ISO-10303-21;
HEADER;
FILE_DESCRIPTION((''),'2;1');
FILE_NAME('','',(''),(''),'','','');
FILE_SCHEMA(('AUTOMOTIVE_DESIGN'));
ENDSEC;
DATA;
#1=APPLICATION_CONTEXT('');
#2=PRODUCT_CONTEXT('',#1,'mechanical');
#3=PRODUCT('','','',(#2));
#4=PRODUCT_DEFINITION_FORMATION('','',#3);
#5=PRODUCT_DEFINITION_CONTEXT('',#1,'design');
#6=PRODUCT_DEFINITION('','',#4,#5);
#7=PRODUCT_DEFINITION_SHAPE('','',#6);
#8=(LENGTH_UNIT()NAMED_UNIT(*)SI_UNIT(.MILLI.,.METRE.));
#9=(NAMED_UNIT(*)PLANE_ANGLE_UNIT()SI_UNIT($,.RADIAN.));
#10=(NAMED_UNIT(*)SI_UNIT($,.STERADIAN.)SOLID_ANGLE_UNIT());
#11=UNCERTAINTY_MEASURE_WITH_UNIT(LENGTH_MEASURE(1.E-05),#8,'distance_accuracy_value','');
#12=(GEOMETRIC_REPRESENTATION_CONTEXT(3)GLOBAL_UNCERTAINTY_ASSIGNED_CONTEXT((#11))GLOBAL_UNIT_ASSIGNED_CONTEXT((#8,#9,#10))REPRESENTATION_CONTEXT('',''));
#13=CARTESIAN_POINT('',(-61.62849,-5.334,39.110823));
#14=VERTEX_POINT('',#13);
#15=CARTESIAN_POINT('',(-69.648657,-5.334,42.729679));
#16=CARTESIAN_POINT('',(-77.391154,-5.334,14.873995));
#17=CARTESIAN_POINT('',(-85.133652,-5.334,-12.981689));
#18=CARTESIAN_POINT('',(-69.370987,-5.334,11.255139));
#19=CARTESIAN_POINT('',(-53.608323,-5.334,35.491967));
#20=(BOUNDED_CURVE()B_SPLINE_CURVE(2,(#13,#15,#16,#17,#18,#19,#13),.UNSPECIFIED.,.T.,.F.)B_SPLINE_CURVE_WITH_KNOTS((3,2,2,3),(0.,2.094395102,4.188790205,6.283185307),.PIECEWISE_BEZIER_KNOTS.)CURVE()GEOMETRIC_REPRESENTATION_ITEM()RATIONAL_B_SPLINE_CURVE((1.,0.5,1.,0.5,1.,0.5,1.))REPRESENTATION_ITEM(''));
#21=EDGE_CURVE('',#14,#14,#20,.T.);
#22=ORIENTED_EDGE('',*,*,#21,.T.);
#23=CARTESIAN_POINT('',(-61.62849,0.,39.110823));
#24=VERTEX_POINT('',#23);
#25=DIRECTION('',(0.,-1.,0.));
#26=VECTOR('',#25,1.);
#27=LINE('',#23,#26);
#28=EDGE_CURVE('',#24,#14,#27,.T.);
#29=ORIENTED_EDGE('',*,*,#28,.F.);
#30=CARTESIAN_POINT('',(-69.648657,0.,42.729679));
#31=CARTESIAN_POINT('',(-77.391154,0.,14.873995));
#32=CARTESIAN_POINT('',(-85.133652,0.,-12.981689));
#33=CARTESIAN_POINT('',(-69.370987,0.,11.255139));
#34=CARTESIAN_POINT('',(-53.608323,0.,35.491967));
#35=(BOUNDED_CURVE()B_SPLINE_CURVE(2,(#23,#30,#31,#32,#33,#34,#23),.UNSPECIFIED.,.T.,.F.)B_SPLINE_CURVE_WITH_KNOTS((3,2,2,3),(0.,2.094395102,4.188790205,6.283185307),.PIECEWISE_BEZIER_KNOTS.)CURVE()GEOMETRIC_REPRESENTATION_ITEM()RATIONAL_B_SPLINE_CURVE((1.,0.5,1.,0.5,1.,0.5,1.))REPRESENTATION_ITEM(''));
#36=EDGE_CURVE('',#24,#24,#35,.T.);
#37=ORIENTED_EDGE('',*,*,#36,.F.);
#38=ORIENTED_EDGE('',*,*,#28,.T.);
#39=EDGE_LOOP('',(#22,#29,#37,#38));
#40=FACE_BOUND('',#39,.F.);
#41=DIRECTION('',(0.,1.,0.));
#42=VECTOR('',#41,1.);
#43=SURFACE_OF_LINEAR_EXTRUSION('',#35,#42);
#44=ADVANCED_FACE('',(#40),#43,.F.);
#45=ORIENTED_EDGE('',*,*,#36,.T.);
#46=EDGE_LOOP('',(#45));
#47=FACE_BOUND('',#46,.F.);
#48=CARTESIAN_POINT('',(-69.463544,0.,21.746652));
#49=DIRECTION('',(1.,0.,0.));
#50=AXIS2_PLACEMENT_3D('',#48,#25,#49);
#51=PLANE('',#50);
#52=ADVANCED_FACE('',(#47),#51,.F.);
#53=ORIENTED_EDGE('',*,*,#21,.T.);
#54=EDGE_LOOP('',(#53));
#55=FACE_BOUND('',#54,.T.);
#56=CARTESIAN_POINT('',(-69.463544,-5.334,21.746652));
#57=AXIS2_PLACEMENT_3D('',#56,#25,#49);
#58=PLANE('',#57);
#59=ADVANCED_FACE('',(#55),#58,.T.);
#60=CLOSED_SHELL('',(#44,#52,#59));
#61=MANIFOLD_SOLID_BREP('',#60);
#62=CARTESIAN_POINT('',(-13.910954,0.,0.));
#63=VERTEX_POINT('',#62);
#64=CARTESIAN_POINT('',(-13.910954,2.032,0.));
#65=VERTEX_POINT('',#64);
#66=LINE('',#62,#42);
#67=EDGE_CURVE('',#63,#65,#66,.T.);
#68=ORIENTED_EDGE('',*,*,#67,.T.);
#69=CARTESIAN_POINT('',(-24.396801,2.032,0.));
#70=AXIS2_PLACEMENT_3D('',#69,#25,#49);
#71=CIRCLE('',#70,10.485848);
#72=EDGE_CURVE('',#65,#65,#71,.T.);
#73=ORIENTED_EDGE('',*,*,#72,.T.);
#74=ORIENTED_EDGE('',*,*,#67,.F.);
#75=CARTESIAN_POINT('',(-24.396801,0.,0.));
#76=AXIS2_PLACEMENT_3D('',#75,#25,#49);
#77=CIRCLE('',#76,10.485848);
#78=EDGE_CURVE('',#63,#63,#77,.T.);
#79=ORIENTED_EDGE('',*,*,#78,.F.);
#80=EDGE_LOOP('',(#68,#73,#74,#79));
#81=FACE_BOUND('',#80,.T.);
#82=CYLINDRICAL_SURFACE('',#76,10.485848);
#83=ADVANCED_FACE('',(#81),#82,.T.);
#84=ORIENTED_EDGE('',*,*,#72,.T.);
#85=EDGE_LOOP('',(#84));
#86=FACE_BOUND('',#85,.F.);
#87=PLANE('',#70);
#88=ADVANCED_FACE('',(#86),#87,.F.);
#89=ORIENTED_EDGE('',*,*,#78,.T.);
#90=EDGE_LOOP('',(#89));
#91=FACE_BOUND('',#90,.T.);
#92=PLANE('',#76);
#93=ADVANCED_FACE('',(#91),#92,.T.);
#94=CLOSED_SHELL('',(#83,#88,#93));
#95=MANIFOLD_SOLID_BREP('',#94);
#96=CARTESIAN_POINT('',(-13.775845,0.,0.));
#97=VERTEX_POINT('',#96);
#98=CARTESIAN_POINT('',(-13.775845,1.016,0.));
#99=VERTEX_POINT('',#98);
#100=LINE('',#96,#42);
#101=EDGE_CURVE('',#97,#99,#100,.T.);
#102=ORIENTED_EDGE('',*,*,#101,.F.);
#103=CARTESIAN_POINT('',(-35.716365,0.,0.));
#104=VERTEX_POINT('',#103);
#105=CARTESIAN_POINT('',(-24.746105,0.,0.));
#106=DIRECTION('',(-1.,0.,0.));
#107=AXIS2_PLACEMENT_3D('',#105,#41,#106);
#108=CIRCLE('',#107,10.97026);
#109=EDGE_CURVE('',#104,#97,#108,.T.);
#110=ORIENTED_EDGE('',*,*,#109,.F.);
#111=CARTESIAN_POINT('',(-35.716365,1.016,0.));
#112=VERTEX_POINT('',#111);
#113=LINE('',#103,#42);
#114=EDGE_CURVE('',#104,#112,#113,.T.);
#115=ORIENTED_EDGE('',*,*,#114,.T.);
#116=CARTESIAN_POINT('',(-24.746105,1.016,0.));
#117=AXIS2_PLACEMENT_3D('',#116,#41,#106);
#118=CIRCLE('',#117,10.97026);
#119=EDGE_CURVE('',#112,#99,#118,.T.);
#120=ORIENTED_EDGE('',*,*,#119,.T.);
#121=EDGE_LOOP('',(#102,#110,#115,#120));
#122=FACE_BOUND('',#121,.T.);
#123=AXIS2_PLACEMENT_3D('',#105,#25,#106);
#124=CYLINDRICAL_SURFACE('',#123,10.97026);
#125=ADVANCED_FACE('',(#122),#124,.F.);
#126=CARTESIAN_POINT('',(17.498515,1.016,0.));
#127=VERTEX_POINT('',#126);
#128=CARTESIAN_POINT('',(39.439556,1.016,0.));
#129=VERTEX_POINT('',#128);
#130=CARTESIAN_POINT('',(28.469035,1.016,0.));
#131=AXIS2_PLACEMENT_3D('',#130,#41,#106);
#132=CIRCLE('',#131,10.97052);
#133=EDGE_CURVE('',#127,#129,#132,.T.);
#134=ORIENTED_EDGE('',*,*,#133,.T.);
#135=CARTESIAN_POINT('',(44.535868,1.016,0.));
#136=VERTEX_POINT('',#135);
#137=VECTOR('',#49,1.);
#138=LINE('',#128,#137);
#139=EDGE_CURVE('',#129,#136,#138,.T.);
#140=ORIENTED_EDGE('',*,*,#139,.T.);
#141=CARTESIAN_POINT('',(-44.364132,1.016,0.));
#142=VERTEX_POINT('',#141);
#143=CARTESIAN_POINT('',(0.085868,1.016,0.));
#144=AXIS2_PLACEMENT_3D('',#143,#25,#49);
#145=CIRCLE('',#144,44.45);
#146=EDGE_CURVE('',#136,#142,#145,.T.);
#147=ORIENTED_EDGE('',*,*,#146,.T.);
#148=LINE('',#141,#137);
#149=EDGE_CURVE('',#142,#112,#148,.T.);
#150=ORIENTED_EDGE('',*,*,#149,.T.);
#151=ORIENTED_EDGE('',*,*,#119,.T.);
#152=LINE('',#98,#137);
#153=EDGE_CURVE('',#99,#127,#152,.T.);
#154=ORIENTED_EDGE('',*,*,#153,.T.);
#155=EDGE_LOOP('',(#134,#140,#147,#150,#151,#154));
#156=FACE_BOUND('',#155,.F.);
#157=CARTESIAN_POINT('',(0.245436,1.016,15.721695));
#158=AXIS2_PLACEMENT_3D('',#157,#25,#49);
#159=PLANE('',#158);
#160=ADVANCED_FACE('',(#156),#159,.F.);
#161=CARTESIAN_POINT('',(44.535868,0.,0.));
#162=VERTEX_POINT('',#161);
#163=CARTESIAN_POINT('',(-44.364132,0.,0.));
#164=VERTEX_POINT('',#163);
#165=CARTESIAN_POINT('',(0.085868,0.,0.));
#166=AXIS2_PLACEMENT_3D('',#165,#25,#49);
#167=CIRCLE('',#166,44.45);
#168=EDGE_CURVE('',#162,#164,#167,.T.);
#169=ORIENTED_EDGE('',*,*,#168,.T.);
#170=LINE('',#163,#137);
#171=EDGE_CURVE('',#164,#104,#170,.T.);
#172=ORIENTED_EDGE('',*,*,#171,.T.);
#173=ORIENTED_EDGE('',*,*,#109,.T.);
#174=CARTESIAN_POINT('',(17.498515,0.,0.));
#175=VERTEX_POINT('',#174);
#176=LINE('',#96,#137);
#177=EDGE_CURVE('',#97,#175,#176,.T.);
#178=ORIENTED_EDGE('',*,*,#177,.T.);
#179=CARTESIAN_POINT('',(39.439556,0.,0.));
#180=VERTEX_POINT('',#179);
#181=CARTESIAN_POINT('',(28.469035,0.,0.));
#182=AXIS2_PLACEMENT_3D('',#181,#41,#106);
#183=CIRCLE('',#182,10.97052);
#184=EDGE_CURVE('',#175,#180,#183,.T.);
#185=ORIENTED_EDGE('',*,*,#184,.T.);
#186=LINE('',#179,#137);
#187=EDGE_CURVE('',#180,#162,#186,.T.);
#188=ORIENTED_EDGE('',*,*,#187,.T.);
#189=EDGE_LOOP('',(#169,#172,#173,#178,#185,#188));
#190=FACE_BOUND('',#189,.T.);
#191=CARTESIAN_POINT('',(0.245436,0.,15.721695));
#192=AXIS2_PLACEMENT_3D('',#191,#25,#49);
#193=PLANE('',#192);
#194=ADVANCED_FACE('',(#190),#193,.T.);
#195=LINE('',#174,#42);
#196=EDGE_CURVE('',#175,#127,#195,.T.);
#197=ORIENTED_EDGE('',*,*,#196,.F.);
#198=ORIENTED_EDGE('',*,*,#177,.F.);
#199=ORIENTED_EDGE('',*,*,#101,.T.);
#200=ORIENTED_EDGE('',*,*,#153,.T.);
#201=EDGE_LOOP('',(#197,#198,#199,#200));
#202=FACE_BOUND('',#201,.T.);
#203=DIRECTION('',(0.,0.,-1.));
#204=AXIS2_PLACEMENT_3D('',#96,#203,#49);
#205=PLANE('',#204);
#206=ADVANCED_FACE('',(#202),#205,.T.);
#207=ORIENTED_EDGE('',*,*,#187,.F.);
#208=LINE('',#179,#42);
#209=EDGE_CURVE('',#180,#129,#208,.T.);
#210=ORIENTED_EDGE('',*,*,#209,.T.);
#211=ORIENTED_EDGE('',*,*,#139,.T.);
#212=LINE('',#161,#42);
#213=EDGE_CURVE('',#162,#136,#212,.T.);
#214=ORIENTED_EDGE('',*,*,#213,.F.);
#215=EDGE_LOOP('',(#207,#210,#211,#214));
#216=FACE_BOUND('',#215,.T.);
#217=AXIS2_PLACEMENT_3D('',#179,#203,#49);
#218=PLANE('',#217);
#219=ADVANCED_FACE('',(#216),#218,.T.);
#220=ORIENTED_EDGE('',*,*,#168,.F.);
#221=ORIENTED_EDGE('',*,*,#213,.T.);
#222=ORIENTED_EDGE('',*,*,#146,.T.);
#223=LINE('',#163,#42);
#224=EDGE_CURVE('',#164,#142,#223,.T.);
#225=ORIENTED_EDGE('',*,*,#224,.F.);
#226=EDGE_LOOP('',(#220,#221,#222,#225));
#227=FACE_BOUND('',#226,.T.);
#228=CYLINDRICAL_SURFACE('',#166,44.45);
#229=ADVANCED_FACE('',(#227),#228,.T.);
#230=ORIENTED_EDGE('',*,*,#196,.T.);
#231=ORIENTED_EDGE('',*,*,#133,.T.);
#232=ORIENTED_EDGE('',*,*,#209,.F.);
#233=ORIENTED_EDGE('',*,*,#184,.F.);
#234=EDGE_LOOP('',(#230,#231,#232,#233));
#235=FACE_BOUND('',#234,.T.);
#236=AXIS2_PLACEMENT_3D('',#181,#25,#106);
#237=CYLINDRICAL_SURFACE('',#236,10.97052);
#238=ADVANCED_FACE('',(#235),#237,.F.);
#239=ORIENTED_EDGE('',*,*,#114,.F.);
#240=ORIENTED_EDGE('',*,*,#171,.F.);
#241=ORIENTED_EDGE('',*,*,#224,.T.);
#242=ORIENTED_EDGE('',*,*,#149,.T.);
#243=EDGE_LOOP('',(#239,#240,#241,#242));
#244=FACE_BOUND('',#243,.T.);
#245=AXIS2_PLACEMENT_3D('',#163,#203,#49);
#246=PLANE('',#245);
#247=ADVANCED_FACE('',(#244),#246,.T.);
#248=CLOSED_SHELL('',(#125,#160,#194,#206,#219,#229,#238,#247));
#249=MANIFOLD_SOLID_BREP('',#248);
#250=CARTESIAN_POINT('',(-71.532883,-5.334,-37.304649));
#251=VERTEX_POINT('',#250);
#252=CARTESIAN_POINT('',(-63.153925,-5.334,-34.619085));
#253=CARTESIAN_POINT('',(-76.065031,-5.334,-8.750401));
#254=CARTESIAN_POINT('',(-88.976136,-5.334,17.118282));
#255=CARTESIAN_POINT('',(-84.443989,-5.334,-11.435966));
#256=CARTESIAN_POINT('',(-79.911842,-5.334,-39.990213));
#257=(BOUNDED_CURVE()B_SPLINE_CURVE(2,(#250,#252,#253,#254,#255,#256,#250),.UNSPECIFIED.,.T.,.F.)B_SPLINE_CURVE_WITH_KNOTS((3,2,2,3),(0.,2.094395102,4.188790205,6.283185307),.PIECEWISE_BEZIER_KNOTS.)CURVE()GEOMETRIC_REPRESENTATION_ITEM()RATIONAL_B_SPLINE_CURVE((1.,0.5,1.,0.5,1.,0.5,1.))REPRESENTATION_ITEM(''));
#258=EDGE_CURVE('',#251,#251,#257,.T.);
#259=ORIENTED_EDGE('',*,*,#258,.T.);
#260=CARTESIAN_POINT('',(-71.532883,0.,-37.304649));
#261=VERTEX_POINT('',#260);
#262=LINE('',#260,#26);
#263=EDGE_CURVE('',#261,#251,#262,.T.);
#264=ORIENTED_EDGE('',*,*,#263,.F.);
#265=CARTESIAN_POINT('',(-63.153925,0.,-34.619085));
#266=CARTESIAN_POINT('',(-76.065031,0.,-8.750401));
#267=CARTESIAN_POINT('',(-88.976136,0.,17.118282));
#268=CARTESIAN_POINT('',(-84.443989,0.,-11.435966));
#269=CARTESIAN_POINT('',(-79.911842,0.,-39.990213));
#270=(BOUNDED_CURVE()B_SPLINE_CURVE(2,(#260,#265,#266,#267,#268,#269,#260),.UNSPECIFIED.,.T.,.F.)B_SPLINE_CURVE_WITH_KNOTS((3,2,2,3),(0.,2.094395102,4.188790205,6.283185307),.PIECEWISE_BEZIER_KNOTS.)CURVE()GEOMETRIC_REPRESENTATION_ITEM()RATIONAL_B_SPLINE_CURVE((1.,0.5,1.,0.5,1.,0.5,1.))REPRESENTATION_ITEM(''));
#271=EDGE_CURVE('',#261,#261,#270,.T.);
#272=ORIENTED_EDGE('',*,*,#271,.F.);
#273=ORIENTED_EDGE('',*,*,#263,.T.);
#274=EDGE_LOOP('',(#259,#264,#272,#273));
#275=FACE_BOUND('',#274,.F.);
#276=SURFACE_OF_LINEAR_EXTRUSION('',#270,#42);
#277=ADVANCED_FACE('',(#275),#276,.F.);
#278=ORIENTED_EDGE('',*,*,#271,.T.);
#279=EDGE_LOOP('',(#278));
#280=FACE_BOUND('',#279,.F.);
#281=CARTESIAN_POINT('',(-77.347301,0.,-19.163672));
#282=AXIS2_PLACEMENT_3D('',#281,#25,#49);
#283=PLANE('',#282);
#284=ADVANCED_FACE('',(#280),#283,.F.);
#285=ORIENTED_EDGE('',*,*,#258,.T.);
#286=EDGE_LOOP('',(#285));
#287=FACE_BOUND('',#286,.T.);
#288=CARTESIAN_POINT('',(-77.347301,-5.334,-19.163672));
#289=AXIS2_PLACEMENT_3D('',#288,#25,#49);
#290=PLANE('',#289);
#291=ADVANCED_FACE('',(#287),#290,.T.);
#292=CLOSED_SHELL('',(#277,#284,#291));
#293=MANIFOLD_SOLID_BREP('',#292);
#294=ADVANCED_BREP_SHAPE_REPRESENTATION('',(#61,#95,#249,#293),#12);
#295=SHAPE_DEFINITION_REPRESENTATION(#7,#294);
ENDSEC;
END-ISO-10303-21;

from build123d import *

# Parameters (mm, degrees)
F3_DEPTH  = 1.016
F8_DEPTH  = 5.334
F9_R      = 10.4858478574
F10_DEPTH = 2.032


# Not quite as in the source:
# - the program builds the solid bodies; features that only make, move or delete a surface that nothing else refers to are left out


with BuildPart() as f3:
    # F0 (on Front) → F3 (new body)
    with BuildSketch(Plane.XZ):
        with BuildLine():
            Line((39.4395558923, 0), (44.5358680129, 0))
            ThreePointArc((44.5358680129, 0), (0.0858680129, 44.45), (-44.3641319871, 0))
            Line((-44.3641319871, 0), (-35.7163650749, 0))
            ThreePointArc((-35.7163650749, 0), (-24.7461050749, 10.97026), (-13.7758450749, 0))
            Line((-13.7758450749, 0), (17.4985149116, 0))
            ThreePointArc((17.4985149116, 0), (28.4690354019, 10.9705204904), (39.4395558923, 0))
        make_face()
    extrude(amount=-F3_DEPTH)


with BuildPart() as f8:
    # F7 (on Front) → F8 (new body)
    with BuildSketch(Plane.XZ):
        with BuildLine():
            add(Edge.make_bspline(
                [(-71.5328833988, -37.3046489378), (-63.153925009, -34.6190845086), (-76.0650305258, -8.7504011379), (-88.9761360426, 17.1182822328), (-84.4439889156, -11.4359655671), (-79.9118417885, -39.990213367), (-71.5328833988, -37.3046489378)],
                knots=[0, 0, 0, 2.0943951024, 2.0943951024, 4.1887902048, 4.1887902048, 6.2831853072, 6.2831853072, 6.2831853072], degree=2, weights=[1, 0.5, 1, 0.5, 1, 0.5, 1]))
        make_face()
    extrude(amount=F8_DEPTH)


with BuildPart() as f8b:
    # F7 (on Front) → F8, piece 2 (new body)
    with BuildSketch(Plane.XZ):
        with BuildLine():
            add(Edge.make_bspline(
                [(-61.6284896097, 39.1108230438), (-69.648656578, 42.7296794653), (-77.3911540702, 14.8739949901), (-85.1336515623, -12.9816894852), (-69.3709871018, 11.2551385686), (-53.6083226413, 35.4919666223), (-61.6284896097, 39.1108230438)],
                knots=[0, 0, 0, 2.0943951024, 2.0943951024, 4.1887902048, 4.1887902048, 6.2831853072, 6.2831853072, 6.2831853072], degree=2, weights=[1, 0.5, 1, 0.5, 1, 0.5, 1]))
        make_face()
    extrude(amount=F8_DEPTH)


with BuildPart() as f10:
    # F9 (on Front) → F10 (new body)
    with BuildSketch(Plane.XZ):
        with Locations((-24.3968013674, 0)):
            Circle(F9_R)
    extrude(amount=-F10_DEPTH)


solid = Compound([f3.part, f8.part, f8b.part, f10.part])
